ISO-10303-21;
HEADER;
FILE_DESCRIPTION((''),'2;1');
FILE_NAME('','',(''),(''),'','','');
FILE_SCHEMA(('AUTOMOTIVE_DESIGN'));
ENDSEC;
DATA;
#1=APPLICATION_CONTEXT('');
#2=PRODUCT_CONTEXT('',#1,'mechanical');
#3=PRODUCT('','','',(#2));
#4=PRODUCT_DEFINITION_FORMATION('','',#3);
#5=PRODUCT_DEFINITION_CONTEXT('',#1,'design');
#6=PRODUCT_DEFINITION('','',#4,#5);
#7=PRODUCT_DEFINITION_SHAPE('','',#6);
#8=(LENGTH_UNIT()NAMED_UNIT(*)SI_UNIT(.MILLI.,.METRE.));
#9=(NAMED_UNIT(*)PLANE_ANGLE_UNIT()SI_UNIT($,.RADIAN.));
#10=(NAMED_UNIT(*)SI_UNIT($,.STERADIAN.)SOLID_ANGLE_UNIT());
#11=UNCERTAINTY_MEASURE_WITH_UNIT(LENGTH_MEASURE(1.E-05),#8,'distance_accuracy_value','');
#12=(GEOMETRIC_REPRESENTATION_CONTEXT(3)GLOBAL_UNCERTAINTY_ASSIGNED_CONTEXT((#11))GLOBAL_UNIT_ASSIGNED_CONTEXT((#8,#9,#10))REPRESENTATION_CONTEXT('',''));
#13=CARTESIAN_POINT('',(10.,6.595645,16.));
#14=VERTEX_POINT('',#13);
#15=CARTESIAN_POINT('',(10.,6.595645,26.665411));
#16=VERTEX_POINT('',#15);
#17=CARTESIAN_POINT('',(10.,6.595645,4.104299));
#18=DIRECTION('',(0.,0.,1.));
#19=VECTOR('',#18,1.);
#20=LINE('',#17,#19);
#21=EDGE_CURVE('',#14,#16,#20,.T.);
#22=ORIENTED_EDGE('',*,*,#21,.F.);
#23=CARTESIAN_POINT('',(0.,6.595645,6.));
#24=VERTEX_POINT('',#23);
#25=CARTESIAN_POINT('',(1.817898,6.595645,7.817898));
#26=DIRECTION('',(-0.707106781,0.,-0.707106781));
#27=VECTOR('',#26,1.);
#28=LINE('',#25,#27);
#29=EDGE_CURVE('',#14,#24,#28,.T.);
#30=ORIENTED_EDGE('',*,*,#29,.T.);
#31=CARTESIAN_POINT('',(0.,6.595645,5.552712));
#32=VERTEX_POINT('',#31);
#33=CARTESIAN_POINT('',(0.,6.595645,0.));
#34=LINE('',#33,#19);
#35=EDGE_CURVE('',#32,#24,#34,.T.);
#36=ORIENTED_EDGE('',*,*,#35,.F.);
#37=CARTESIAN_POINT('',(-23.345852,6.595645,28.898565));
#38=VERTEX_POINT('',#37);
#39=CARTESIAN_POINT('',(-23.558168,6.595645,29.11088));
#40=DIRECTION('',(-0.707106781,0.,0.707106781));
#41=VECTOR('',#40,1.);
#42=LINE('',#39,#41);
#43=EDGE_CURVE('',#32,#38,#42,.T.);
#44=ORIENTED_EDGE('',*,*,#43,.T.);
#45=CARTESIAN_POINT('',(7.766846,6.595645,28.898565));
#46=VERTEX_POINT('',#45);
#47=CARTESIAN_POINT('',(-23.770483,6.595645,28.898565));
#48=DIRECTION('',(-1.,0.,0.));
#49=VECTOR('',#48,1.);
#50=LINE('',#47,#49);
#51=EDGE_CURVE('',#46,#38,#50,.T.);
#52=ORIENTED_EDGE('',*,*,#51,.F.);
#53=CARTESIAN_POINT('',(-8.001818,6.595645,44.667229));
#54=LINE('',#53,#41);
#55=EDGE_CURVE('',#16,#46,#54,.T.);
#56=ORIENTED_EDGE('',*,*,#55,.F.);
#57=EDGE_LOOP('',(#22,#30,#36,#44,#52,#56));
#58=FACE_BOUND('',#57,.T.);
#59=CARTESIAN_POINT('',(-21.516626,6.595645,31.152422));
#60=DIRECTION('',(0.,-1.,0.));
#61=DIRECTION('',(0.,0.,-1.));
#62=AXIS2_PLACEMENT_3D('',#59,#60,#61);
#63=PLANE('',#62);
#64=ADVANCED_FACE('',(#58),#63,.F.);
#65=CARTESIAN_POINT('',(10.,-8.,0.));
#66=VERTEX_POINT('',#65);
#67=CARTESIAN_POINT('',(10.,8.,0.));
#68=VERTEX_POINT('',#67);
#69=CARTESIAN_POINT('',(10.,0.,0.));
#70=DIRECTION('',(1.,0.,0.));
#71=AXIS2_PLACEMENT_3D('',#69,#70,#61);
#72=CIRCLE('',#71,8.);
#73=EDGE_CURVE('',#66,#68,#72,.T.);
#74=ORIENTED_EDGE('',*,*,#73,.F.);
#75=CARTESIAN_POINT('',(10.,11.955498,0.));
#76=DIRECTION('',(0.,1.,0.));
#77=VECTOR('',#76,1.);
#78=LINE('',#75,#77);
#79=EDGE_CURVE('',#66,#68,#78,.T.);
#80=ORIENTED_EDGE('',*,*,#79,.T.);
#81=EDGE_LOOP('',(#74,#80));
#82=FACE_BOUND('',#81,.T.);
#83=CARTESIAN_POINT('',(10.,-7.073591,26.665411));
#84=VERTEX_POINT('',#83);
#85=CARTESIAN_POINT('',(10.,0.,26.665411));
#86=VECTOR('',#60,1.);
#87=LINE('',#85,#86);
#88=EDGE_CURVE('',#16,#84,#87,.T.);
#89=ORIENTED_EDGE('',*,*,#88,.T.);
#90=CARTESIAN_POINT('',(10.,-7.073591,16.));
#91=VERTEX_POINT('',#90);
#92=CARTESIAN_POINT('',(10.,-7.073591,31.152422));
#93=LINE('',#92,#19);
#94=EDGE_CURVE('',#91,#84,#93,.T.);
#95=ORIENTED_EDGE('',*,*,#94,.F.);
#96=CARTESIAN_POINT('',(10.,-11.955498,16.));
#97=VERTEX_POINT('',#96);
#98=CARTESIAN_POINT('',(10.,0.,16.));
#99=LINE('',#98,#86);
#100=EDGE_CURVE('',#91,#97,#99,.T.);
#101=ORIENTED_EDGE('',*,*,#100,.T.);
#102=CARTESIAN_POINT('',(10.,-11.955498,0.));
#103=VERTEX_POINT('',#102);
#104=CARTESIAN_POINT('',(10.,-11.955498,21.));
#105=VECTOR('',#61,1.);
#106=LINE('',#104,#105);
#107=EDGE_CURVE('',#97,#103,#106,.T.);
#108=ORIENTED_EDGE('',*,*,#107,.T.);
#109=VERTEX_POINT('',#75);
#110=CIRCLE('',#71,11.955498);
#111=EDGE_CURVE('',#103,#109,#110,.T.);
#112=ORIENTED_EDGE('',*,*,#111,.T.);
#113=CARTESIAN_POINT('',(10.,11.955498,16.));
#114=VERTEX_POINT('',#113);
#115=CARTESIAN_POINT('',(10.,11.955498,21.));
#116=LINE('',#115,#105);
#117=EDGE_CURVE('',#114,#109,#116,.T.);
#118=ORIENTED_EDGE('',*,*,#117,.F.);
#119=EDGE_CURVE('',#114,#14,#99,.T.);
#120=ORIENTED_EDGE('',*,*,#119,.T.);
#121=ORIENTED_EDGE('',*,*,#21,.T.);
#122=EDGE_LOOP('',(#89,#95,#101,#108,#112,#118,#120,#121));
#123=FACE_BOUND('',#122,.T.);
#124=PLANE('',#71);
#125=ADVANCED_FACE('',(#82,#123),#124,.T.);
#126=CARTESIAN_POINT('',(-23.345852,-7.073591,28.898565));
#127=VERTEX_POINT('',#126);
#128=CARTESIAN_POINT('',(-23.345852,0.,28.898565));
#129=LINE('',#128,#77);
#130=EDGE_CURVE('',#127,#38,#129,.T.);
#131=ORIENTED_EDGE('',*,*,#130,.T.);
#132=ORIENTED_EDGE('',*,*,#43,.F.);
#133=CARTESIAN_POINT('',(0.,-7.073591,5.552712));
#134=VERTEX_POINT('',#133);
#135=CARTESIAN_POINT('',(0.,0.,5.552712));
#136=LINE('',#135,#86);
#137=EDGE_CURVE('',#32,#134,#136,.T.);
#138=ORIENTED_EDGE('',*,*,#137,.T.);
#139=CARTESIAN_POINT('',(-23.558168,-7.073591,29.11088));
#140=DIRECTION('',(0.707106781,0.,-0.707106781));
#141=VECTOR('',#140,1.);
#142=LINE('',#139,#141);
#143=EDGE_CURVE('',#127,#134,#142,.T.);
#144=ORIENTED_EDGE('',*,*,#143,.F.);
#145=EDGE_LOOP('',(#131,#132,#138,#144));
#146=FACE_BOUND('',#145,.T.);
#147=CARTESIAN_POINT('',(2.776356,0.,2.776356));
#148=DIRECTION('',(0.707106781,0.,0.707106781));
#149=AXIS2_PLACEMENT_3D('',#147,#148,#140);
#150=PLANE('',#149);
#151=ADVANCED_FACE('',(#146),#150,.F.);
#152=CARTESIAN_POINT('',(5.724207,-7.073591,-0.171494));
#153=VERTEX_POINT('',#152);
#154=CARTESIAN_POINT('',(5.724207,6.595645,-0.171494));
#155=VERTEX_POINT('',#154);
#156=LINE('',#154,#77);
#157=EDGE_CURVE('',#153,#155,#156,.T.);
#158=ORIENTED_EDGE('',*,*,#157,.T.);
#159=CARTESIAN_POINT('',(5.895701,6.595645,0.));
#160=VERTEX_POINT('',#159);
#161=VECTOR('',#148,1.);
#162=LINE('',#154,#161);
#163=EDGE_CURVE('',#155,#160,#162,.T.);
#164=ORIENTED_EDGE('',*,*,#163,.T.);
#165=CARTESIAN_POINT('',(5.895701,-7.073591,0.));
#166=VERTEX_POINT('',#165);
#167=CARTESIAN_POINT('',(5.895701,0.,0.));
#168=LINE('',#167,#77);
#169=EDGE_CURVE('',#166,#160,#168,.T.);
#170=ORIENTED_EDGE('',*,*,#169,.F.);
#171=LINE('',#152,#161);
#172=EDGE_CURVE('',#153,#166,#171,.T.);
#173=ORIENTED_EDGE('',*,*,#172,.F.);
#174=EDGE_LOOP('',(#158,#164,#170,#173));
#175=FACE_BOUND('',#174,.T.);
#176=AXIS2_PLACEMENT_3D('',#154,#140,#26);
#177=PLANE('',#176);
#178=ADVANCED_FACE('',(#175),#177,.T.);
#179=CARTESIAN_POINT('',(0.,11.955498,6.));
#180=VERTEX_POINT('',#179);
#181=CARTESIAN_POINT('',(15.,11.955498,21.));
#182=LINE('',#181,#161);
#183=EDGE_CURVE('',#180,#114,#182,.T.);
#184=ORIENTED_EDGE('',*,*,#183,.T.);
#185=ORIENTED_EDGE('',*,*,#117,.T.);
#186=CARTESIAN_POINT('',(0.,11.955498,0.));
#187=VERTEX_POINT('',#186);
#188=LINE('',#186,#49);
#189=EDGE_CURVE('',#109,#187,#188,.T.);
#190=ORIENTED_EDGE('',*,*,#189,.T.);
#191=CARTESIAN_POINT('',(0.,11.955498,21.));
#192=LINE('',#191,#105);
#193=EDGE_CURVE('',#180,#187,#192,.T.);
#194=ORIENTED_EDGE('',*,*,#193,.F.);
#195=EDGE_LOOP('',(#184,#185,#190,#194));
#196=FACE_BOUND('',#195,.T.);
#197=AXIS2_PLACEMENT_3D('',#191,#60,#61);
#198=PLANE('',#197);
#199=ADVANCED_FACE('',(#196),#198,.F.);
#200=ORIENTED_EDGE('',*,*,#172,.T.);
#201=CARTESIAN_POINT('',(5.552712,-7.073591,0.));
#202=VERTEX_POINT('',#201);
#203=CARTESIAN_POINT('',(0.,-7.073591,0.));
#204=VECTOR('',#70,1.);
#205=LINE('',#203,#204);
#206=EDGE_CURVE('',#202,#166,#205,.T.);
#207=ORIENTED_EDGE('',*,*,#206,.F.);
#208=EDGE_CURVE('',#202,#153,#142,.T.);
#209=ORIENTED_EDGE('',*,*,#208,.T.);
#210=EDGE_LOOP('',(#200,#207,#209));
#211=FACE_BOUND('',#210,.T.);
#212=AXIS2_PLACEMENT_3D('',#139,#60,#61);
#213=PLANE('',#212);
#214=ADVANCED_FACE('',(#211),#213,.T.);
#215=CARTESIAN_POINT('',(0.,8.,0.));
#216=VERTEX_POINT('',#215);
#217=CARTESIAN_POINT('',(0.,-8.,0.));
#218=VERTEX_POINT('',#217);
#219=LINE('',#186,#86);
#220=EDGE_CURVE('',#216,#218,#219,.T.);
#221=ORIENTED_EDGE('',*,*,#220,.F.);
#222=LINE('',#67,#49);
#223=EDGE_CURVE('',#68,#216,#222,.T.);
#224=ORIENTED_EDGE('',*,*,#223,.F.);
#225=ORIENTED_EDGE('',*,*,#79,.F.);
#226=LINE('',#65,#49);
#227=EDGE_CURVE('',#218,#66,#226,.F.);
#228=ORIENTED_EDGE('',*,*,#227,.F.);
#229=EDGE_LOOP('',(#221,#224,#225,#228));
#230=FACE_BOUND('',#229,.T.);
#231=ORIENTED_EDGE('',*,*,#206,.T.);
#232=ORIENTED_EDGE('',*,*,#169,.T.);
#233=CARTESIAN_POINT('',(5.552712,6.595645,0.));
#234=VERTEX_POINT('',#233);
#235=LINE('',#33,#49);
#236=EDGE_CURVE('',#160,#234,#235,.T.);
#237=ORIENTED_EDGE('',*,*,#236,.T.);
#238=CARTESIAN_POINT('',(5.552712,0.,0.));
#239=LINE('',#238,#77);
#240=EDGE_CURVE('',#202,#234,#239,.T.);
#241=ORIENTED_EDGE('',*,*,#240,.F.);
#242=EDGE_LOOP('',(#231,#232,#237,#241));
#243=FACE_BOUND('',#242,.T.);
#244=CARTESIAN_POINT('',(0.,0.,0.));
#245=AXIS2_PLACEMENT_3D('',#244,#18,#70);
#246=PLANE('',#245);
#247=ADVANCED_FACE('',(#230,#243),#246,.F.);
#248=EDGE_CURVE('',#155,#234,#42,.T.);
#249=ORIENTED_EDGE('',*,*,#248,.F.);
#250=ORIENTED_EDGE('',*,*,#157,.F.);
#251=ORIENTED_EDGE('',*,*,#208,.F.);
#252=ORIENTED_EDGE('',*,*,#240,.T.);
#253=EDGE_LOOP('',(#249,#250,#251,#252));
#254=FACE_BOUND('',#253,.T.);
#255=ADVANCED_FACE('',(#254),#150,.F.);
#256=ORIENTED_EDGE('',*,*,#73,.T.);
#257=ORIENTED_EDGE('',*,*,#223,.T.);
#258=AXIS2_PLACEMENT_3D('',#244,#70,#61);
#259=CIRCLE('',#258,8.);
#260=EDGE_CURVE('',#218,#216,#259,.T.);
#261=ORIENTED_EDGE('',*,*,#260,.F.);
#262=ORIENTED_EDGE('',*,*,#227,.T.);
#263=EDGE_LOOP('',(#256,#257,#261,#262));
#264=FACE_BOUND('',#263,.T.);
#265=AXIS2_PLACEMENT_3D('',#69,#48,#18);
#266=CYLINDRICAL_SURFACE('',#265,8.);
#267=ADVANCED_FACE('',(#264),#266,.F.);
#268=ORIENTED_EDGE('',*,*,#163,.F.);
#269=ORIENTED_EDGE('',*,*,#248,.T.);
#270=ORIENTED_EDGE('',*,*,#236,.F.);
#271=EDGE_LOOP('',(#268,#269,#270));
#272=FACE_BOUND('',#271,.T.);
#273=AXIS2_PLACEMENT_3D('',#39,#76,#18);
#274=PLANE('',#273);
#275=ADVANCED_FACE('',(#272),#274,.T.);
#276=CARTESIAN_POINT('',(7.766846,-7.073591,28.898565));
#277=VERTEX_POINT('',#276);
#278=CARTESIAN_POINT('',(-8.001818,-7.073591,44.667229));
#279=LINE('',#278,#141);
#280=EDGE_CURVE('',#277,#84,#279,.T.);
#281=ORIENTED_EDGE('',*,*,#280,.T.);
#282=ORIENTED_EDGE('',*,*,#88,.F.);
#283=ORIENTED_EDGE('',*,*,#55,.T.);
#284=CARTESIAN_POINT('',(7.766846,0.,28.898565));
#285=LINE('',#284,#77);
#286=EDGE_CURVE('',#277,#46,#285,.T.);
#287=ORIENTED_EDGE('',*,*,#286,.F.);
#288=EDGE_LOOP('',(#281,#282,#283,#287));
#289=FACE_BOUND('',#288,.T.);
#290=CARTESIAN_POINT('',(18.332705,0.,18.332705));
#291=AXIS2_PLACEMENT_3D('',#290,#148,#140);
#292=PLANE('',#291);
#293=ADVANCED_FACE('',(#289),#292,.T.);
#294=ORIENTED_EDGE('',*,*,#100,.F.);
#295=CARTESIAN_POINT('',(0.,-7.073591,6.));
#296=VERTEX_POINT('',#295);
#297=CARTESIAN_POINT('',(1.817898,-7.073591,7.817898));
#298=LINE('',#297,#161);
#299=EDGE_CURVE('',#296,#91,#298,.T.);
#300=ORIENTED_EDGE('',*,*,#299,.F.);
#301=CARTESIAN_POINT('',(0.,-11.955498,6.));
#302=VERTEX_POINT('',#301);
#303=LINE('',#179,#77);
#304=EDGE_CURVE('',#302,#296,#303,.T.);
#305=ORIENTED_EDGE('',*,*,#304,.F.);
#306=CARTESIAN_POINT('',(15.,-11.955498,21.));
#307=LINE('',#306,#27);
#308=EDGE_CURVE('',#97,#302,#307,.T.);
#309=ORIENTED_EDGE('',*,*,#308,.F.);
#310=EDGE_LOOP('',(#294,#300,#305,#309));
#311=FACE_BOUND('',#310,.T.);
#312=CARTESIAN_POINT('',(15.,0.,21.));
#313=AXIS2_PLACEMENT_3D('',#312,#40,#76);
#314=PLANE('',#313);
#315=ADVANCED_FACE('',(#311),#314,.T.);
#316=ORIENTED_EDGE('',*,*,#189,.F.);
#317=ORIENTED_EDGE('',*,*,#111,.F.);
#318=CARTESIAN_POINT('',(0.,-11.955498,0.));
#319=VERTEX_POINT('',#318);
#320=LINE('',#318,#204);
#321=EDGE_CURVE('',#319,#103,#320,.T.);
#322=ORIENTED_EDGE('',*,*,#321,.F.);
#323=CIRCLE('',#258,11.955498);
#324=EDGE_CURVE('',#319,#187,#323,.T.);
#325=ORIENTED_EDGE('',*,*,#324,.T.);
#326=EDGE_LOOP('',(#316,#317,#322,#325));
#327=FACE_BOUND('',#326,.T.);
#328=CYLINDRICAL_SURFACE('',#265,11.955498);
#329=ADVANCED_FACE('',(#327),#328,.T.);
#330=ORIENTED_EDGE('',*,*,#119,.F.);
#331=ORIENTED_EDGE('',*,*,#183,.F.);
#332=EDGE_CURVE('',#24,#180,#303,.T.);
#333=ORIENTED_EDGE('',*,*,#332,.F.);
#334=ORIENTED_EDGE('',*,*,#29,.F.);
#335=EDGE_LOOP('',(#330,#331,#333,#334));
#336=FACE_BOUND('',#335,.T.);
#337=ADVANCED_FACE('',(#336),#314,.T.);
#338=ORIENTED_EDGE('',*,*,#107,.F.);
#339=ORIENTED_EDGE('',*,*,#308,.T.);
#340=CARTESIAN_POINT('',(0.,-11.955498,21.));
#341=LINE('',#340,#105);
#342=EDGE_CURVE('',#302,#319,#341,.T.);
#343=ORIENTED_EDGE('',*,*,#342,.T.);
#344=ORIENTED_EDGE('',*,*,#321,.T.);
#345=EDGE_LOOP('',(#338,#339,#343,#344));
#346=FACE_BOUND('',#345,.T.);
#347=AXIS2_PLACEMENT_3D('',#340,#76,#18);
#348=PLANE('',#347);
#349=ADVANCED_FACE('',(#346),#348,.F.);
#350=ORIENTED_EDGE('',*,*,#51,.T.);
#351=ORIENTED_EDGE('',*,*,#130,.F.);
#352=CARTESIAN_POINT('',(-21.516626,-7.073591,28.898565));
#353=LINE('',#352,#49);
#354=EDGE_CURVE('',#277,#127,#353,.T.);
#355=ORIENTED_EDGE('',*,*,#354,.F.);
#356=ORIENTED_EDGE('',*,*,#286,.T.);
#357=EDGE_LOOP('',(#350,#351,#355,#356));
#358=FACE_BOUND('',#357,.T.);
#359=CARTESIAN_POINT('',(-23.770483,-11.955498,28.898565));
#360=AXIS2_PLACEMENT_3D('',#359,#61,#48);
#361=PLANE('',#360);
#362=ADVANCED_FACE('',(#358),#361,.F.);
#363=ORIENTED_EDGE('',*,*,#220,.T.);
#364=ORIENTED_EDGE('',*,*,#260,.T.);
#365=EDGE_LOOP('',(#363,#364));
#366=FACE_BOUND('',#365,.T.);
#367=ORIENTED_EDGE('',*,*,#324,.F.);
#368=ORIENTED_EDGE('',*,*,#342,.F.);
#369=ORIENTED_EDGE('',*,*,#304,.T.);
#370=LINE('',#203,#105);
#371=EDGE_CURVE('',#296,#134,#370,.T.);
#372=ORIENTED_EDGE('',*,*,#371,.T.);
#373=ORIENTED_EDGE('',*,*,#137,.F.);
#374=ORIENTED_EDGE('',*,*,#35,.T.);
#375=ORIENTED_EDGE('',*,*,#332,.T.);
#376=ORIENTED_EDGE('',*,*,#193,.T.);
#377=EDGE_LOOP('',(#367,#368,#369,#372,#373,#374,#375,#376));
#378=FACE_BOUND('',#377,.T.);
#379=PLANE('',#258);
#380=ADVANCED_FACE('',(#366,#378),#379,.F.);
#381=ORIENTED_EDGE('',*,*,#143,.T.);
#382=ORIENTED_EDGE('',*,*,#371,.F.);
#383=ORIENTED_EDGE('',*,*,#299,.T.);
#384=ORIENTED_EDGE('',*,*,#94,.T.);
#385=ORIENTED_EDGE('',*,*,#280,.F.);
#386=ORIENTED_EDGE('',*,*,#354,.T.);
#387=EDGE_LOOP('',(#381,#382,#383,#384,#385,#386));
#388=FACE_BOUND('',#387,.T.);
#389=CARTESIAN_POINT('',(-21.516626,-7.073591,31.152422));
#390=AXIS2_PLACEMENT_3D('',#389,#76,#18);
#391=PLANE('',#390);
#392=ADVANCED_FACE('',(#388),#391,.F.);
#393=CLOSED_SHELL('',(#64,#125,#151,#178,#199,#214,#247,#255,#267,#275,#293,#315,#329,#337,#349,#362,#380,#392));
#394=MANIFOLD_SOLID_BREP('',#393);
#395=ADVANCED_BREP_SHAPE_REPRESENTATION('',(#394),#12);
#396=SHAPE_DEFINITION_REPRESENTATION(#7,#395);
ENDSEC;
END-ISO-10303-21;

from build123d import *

# Parameters (mm, degrees)
SZKIC1_R                         = 11.955497861
SZKIC1_R_2                       = 8
DODANIE_WYCI_GNI_CIE1_DEPTH      = 10
SZKIC2_W                         = 10
SZKIC2_H                         = 23.910995722
DODANIE_WYCI_GNI_CIE2_DEPTH      = 21
SFAZOWANIE1_SIZE                 = 15
SZKIC4_W                         = 9.112824073
SZKIC4_H                         = 13.669236109
DODANIE_WYCI_GNI_CIE4_DEPTH      = 33
DODANIE_WYCI_GNI_CIE5_DEPTH      = 10
DODANIE_WYCI_GNI_CIE5_DEPTH_BACK = 12
SZKIC5_W                         = 41.411530905
SZKIC5_H                         = 13.669236109
SZKIC6_W                         = 16.08298615
SZKIC6_H                         = 27.20632334
WYTNIJ_WYCI_GNI_CIE1_DEPTH       = 54.798638821
WYTNIJ_WYCI_GNI_CIE2_DEPTH       = 54.798638821


with BuildPart() as part:
    # Szkic1 → Dodanie-wyciągnięcie1 (new body)
    with BuildSketch(Plane(origin=(0, 0, 0), x_dir=(0, 0, -1), z_dir=(1, 0, 0))):
        Circle(SZKIC1_R)
        Circle(SZKIC1_R_2, mode=Mode.SUBTRACT)
    extrude(amount=DODANIE_WYCI_GNI_CIE1_DEPTH)

    # Szkic2 → Dodanie-wyciągnięcie2 (add)
    with BuildSketch(Plane.XY):
        with Locations((5, 0)):
            Rectangle(SZKIC2_W, SZKIC2_H)
    extrude(amount=DODANIE_WYCI_GNI_CIE2_DEPTH)

    # Sfazowanie1
    # the kernel refuses this chamfer: 15 mm, written as the material it takes off along each edge
    with BuildSketch(Plane(origin=(0, -50.53074268, 21), x_dir=(0.9996219169112968, 0, 0.02749587661058632), z_dir=(0, 1, 0))) as sfazowanie1_piece_1:
        Polygon((SFAZOWANIE1_SIZE * 0.999621916911, SFAZOWANIE1_SIZE * 0.0274958766106), (-SFAZOWANIE1_SIZE * 0.0274958766106, SFAZOWANIE1_SIZE * 0.999621916911), (0, 0), align=None)
    extrude(amount=101.06148536, mode=Mode.SUBTRACT)

    # Szkic4 → Dodanie-wyciągnięcie4 (add)
    with BuildSketch(Plane(origin=(-3, 0, 3), x_dir=(0.7071067811865513, 0, 0.7071067811865438), z_dir=(-0.7071067811865438, 0, 0.7071067811865513))):
        with Locations((11.369948619, -0.23897266)):
            Rectangle(SZKIC4_W, SZKIC4_H)
    extrude(amount=DODANIE_WYCI_GNI_CIE4_DEPTH)

    # Szkic5 → Dodanie-wyciągnięcie5 (add, two sides: drawn at the far end of the back side and taken through both)
    with BuildSketch(Plane(origin=(11.261637619, 0, 11.261637619), x_dir=(0.7071067811865438, 0, -0.7071067811865512), z_dir=(0.7071067811865512, 0, 0.7071067811865438)).offset(-DODANIE_WYCI_GNI_CIE5_DEPTH_BACK)):
        with Locations((-16.536875235, -0.23897266)):
            Rectangle(SZKIC5_W, SZKIC5_H)
    extrude(amount=DODANIE_WYCI_GNI_CIE5_DEPTH + DODANIE_WYCI_GNI_CIE5_DEPTH_BACK)

    # Szkic6 → Wytnij-wyciągnięcie1 (cut, through all)
    with BuildSketch(Plane(origin=(0, 6.595645395, 0), x_dir=(1, 0, 0), z_dir=(0, 1, 0))):
        with Locations((18.041493075, -17.707460584)):
            Rectangle(SZKIC6_W, SZKIC6_H)
    extrude(amount=-WYTNIJ_WYCI_GNI_CIE1_DEPTH, mode=Mode.SUBTRACT)

    # Szkic7 → Wytnij-wyciągnięcie2 (cut, through all)
    with BuildSketch(Plane(origin=(0, 6.595645395, 0), x_dir=(1, 0, 0), z_dir=(0, 1, 0))):
        Polygon((-23.770482817, -28.898564741), (9.416159533, -28.898564741), (9.416159533, -47.919361128), (-20.148773981, -47.919361128), align=None)
    extrude(amount=-WYTNIJ_WYCI_GNI_CIE2_DEPTH, mode=Mode.SUBTRACT)


solid = part.part
